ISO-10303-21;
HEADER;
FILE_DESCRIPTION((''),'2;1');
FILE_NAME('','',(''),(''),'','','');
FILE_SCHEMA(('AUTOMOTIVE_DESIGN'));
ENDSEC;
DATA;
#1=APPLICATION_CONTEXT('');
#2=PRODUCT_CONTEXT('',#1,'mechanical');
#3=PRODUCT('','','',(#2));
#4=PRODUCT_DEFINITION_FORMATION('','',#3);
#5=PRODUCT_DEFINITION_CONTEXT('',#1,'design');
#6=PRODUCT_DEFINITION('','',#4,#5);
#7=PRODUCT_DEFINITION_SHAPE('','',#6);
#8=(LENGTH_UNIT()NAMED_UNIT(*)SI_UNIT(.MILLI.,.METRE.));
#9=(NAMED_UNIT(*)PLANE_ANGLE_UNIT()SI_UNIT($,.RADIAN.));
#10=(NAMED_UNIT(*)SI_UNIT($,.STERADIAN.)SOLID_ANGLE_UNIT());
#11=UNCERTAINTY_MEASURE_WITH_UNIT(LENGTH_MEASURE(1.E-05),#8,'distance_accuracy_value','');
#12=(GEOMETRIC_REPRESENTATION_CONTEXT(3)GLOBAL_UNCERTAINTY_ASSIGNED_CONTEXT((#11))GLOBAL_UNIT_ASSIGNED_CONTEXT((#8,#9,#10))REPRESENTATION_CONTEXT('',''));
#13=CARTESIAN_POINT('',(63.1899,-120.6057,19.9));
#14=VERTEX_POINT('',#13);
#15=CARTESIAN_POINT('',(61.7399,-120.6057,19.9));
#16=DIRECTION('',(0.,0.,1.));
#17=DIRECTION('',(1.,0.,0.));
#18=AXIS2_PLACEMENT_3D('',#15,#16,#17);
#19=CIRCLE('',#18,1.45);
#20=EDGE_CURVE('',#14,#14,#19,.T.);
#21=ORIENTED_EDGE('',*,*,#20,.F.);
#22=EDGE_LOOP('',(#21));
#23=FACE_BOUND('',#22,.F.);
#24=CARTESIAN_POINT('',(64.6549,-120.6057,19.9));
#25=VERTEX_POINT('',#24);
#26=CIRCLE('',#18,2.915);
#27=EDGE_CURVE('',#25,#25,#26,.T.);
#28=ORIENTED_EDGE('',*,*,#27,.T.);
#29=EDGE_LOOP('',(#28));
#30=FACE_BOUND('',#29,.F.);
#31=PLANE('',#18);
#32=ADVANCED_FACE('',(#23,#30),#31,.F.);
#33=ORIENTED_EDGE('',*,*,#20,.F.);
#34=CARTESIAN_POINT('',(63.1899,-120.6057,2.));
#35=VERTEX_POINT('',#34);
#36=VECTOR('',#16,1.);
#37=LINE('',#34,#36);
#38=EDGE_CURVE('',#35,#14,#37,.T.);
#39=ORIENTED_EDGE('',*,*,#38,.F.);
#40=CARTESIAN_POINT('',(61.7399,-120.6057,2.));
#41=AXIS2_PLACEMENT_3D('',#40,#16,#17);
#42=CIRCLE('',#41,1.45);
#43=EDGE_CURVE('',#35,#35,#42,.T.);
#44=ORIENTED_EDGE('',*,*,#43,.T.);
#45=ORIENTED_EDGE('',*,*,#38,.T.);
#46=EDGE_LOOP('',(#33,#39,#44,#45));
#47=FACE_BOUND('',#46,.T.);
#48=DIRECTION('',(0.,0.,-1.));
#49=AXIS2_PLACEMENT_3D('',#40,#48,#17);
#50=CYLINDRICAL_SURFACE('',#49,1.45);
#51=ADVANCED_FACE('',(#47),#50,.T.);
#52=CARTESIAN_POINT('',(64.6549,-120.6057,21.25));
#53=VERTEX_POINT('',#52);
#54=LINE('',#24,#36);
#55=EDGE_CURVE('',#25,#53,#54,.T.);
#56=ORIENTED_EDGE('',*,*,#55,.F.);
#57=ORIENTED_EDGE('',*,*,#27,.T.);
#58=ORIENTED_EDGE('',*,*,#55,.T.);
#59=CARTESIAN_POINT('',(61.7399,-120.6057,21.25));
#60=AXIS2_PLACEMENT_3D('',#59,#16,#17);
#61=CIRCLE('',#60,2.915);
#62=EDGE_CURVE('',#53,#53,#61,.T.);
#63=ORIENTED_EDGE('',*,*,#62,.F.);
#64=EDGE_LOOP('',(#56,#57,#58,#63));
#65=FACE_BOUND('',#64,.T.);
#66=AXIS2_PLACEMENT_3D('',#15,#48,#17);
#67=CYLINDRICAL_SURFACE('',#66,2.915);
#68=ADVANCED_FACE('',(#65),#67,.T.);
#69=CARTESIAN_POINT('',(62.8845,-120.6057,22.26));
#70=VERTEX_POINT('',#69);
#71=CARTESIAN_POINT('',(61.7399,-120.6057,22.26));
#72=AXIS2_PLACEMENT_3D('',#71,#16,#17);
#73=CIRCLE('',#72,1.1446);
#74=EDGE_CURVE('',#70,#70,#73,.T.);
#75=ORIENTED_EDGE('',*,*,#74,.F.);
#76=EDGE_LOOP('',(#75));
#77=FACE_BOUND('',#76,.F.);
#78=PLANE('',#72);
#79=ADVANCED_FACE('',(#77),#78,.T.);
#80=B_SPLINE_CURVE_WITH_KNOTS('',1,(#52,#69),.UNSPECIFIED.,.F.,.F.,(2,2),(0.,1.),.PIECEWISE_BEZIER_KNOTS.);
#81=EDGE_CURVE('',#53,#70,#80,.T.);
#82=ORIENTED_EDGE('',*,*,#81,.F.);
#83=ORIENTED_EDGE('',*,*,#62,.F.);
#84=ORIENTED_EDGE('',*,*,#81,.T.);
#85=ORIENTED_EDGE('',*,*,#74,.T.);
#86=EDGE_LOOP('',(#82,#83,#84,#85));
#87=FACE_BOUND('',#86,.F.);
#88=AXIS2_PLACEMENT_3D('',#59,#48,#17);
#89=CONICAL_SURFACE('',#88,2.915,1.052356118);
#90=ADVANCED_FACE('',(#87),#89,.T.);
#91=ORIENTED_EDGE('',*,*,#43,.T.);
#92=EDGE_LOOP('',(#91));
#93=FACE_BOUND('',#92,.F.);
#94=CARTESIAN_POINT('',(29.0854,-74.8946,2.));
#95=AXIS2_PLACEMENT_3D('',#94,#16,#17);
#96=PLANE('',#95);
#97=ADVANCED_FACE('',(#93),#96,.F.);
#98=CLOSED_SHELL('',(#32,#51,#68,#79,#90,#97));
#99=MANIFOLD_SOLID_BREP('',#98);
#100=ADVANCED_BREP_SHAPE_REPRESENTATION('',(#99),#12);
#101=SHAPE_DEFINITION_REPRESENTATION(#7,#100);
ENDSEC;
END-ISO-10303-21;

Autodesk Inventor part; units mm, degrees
ref_plane "YZ Plane" through (0, 0, 0) normal (1, 0, 0) x (0, 1, 0)
ref_plane "XZ Plane" through (0, 0, 0) normal (0, 1, 0) x (-1, 0, 0)
ref_plane "XY Plane" through (0, 0, 0) normal (0, 0, 1) x (1, 0, 0)
ref_plane "Work Plane1" through (29.0854, -74.8946, 2) normal (0, 0, 1) x (1, 0, 0)
sketch "Sketch1" plane through (29.0854, -74.8946, 2) normal (0, 0, 1) x (1, 0, 0)
  line L0 (19.0856, -32.3111) -> (19.0856, -42.3111) projected
  line L1 (29.0856, -32.3111) -> (19.0856, -32.3111) projected
  line L2 (29.0856, -42.3111) -> (29.0856, -32.3111) projected
  line L3 (19.0856, -42.3111) -> (29.0856, -42.3111) projected
  circle A0 centre (32.6545, -45.7111) radius 1.45
  point P0 (-29.0854, 74.8946)
  dimension "d1" = 2.9
extrude "Extrusion1" add sketch "Sketch1" along normal blind 17.9 contours A0
sketch "Sketch2" plane through (61.7399, -120.6057, 19.9) normal (0, 0, 1) x (1, 0, 0)
  circle A0 centre (0, 0) radius 1.45 projected
  circle A1 centre (0, 0) radius 2.915
  point P0 (-61.7399, 120.6057)
  dimension "d4" = 5.83
extrude "Extrusion2" add sketch "Sketch2" along normal blind 1.35 contours A0 | A1
ref_plane "Work Plane2" through (61.7399, -120.6057, 22.26) normal (0, 0, 1) x (1, 0, 0)
sketch "Sketch3" plane through (61.7399, -120.6057, 22.26) normal (0, 0, 1) x (1, 0, 0)
  circle A0 centre (0, 0) radius 1.45 construction
  circle A1 centre (0, 0) radius 1.1446
  point P0 (-61.7399, 120.6057)
loft "Loft1" add profiles "Sketch3" section 1 edges at (58.8249, -120.6057, 21.25)
ref_plane "Work Plane3" through (61.7399, -120.6057, 19.9) normal (0, 0, -1) x (-1, 0, 0)
properties part number "screw"
